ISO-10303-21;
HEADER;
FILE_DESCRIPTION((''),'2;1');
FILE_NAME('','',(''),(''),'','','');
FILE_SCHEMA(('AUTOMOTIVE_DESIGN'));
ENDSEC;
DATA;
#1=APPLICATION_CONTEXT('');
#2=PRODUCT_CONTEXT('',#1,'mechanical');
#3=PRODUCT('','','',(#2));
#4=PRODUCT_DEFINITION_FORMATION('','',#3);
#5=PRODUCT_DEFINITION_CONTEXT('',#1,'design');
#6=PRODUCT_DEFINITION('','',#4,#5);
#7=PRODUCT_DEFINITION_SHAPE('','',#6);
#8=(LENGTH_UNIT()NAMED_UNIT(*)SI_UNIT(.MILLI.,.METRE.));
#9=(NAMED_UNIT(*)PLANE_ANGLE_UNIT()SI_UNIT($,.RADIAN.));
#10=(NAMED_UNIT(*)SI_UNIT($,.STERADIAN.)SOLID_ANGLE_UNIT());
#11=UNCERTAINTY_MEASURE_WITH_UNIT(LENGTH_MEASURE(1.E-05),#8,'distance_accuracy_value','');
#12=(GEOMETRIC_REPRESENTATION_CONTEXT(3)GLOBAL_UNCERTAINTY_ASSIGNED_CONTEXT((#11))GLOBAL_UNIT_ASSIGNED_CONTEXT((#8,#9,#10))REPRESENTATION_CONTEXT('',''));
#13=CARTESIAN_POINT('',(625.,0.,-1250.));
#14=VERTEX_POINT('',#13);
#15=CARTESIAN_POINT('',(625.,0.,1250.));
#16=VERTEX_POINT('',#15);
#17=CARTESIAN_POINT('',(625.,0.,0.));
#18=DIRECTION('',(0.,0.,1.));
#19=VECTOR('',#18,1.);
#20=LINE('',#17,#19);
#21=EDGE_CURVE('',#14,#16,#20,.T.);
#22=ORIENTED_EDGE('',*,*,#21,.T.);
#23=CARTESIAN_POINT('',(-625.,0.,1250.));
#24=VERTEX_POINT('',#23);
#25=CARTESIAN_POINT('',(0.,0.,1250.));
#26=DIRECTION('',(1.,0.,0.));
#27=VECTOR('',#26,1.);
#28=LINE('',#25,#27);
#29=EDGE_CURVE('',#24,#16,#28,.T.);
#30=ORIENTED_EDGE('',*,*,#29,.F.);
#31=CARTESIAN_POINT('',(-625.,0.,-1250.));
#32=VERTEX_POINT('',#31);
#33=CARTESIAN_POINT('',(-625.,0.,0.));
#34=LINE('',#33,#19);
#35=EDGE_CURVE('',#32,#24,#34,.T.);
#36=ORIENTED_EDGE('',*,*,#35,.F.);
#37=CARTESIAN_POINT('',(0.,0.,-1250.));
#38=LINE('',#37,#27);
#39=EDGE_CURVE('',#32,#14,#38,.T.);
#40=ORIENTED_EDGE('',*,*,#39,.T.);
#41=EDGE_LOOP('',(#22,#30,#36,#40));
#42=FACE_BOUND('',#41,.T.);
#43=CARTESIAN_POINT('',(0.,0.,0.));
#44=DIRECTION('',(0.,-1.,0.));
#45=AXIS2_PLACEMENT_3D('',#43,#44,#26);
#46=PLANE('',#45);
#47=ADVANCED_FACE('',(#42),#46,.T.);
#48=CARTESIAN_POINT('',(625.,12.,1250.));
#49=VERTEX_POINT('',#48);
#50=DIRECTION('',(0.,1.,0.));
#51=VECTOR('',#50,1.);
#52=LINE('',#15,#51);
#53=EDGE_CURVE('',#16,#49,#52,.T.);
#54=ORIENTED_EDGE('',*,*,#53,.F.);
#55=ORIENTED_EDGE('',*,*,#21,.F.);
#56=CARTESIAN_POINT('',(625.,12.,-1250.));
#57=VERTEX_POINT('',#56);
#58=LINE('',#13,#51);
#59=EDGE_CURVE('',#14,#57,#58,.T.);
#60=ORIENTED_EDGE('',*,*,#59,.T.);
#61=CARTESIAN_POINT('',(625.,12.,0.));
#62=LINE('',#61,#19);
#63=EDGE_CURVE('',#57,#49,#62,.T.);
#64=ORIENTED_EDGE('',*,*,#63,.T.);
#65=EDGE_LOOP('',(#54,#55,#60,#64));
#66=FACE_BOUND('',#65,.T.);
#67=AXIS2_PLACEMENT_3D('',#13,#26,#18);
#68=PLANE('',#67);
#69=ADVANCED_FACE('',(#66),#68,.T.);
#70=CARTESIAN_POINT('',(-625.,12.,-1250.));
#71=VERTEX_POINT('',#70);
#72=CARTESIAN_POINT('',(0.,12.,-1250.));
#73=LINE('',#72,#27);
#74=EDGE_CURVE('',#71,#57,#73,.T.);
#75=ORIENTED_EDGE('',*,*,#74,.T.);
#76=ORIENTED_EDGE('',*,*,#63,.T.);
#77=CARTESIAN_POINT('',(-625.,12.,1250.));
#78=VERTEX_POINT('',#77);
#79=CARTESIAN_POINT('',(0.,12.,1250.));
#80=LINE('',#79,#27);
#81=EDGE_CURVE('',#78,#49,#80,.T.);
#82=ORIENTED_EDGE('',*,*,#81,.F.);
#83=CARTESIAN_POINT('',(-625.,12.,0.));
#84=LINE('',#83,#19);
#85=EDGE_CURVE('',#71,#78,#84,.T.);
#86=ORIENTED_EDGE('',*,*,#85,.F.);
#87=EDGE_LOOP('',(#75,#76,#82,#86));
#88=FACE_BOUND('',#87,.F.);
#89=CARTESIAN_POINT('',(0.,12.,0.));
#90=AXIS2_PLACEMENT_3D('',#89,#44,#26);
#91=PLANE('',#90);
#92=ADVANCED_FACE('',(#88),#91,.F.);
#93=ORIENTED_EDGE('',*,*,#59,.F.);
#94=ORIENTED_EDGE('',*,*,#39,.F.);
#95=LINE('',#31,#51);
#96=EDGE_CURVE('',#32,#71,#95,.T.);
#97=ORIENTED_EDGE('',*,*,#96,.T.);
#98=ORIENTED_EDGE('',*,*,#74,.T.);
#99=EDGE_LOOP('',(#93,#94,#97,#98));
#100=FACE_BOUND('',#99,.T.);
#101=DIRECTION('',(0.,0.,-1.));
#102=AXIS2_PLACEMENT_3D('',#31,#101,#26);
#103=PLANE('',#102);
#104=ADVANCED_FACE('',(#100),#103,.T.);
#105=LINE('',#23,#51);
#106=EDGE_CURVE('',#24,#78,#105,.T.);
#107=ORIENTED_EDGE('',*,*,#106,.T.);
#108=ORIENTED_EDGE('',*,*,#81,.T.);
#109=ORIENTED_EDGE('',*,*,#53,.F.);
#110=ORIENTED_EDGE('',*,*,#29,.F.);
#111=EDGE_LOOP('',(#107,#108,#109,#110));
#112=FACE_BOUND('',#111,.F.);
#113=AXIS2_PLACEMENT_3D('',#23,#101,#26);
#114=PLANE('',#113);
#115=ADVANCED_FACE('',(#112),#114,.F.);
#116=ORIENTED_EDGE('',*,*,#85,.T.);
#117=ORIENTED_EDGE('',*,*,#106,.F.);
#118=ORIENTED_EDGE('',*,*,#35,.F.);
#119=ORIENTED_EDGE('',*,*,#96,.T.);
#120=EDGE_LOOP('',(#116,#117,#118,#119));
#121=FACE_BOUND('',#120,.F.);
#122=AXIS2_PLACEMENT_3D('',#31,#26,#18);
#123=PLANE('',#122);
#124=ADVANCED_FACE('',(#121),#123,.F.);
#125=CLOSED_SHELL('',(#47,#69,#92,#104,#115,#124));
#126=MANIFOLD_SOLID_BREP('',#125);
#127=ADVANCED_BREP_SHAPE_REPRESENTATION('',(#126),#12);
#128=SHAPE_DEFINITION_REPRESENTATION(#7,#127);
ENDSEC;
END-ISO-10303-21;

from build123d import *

# Parameters (mm, degrees)
F7_W     = 1250
F7_H     = 2500
F1_DEPTH = 12
F8_W     = 1150
F8_H     = 2400
F2_DEPTH = 200
F3_W     = 1250
F3_H     = 2500
F4_DEPTH = 12


with BuildPart() as f1:
    # F7 (on Front) → F1 (new body)
    with BuildSketch(Plane.XZ):
        Rectangle(F7_W, F7_H)
    extrude(amount=-F1_DEPTH)


with BuildPart() as f2:
    # F8 (on face) → F2 (new body)
    with BuildSketch(Plane.XZ):
        Rectangle(F8_W, F8_H)
    extrude(amount=F2_DEPTH)


with BuildPart() as f4:
    # F3 (on face) → F4 (new body)
    with BuildSketch(Plane.XZ.offset(200)):
        Rectangle(F3_W, F3_H)
    extrude(amount=F4_DEPTH)


solid = f1.part
